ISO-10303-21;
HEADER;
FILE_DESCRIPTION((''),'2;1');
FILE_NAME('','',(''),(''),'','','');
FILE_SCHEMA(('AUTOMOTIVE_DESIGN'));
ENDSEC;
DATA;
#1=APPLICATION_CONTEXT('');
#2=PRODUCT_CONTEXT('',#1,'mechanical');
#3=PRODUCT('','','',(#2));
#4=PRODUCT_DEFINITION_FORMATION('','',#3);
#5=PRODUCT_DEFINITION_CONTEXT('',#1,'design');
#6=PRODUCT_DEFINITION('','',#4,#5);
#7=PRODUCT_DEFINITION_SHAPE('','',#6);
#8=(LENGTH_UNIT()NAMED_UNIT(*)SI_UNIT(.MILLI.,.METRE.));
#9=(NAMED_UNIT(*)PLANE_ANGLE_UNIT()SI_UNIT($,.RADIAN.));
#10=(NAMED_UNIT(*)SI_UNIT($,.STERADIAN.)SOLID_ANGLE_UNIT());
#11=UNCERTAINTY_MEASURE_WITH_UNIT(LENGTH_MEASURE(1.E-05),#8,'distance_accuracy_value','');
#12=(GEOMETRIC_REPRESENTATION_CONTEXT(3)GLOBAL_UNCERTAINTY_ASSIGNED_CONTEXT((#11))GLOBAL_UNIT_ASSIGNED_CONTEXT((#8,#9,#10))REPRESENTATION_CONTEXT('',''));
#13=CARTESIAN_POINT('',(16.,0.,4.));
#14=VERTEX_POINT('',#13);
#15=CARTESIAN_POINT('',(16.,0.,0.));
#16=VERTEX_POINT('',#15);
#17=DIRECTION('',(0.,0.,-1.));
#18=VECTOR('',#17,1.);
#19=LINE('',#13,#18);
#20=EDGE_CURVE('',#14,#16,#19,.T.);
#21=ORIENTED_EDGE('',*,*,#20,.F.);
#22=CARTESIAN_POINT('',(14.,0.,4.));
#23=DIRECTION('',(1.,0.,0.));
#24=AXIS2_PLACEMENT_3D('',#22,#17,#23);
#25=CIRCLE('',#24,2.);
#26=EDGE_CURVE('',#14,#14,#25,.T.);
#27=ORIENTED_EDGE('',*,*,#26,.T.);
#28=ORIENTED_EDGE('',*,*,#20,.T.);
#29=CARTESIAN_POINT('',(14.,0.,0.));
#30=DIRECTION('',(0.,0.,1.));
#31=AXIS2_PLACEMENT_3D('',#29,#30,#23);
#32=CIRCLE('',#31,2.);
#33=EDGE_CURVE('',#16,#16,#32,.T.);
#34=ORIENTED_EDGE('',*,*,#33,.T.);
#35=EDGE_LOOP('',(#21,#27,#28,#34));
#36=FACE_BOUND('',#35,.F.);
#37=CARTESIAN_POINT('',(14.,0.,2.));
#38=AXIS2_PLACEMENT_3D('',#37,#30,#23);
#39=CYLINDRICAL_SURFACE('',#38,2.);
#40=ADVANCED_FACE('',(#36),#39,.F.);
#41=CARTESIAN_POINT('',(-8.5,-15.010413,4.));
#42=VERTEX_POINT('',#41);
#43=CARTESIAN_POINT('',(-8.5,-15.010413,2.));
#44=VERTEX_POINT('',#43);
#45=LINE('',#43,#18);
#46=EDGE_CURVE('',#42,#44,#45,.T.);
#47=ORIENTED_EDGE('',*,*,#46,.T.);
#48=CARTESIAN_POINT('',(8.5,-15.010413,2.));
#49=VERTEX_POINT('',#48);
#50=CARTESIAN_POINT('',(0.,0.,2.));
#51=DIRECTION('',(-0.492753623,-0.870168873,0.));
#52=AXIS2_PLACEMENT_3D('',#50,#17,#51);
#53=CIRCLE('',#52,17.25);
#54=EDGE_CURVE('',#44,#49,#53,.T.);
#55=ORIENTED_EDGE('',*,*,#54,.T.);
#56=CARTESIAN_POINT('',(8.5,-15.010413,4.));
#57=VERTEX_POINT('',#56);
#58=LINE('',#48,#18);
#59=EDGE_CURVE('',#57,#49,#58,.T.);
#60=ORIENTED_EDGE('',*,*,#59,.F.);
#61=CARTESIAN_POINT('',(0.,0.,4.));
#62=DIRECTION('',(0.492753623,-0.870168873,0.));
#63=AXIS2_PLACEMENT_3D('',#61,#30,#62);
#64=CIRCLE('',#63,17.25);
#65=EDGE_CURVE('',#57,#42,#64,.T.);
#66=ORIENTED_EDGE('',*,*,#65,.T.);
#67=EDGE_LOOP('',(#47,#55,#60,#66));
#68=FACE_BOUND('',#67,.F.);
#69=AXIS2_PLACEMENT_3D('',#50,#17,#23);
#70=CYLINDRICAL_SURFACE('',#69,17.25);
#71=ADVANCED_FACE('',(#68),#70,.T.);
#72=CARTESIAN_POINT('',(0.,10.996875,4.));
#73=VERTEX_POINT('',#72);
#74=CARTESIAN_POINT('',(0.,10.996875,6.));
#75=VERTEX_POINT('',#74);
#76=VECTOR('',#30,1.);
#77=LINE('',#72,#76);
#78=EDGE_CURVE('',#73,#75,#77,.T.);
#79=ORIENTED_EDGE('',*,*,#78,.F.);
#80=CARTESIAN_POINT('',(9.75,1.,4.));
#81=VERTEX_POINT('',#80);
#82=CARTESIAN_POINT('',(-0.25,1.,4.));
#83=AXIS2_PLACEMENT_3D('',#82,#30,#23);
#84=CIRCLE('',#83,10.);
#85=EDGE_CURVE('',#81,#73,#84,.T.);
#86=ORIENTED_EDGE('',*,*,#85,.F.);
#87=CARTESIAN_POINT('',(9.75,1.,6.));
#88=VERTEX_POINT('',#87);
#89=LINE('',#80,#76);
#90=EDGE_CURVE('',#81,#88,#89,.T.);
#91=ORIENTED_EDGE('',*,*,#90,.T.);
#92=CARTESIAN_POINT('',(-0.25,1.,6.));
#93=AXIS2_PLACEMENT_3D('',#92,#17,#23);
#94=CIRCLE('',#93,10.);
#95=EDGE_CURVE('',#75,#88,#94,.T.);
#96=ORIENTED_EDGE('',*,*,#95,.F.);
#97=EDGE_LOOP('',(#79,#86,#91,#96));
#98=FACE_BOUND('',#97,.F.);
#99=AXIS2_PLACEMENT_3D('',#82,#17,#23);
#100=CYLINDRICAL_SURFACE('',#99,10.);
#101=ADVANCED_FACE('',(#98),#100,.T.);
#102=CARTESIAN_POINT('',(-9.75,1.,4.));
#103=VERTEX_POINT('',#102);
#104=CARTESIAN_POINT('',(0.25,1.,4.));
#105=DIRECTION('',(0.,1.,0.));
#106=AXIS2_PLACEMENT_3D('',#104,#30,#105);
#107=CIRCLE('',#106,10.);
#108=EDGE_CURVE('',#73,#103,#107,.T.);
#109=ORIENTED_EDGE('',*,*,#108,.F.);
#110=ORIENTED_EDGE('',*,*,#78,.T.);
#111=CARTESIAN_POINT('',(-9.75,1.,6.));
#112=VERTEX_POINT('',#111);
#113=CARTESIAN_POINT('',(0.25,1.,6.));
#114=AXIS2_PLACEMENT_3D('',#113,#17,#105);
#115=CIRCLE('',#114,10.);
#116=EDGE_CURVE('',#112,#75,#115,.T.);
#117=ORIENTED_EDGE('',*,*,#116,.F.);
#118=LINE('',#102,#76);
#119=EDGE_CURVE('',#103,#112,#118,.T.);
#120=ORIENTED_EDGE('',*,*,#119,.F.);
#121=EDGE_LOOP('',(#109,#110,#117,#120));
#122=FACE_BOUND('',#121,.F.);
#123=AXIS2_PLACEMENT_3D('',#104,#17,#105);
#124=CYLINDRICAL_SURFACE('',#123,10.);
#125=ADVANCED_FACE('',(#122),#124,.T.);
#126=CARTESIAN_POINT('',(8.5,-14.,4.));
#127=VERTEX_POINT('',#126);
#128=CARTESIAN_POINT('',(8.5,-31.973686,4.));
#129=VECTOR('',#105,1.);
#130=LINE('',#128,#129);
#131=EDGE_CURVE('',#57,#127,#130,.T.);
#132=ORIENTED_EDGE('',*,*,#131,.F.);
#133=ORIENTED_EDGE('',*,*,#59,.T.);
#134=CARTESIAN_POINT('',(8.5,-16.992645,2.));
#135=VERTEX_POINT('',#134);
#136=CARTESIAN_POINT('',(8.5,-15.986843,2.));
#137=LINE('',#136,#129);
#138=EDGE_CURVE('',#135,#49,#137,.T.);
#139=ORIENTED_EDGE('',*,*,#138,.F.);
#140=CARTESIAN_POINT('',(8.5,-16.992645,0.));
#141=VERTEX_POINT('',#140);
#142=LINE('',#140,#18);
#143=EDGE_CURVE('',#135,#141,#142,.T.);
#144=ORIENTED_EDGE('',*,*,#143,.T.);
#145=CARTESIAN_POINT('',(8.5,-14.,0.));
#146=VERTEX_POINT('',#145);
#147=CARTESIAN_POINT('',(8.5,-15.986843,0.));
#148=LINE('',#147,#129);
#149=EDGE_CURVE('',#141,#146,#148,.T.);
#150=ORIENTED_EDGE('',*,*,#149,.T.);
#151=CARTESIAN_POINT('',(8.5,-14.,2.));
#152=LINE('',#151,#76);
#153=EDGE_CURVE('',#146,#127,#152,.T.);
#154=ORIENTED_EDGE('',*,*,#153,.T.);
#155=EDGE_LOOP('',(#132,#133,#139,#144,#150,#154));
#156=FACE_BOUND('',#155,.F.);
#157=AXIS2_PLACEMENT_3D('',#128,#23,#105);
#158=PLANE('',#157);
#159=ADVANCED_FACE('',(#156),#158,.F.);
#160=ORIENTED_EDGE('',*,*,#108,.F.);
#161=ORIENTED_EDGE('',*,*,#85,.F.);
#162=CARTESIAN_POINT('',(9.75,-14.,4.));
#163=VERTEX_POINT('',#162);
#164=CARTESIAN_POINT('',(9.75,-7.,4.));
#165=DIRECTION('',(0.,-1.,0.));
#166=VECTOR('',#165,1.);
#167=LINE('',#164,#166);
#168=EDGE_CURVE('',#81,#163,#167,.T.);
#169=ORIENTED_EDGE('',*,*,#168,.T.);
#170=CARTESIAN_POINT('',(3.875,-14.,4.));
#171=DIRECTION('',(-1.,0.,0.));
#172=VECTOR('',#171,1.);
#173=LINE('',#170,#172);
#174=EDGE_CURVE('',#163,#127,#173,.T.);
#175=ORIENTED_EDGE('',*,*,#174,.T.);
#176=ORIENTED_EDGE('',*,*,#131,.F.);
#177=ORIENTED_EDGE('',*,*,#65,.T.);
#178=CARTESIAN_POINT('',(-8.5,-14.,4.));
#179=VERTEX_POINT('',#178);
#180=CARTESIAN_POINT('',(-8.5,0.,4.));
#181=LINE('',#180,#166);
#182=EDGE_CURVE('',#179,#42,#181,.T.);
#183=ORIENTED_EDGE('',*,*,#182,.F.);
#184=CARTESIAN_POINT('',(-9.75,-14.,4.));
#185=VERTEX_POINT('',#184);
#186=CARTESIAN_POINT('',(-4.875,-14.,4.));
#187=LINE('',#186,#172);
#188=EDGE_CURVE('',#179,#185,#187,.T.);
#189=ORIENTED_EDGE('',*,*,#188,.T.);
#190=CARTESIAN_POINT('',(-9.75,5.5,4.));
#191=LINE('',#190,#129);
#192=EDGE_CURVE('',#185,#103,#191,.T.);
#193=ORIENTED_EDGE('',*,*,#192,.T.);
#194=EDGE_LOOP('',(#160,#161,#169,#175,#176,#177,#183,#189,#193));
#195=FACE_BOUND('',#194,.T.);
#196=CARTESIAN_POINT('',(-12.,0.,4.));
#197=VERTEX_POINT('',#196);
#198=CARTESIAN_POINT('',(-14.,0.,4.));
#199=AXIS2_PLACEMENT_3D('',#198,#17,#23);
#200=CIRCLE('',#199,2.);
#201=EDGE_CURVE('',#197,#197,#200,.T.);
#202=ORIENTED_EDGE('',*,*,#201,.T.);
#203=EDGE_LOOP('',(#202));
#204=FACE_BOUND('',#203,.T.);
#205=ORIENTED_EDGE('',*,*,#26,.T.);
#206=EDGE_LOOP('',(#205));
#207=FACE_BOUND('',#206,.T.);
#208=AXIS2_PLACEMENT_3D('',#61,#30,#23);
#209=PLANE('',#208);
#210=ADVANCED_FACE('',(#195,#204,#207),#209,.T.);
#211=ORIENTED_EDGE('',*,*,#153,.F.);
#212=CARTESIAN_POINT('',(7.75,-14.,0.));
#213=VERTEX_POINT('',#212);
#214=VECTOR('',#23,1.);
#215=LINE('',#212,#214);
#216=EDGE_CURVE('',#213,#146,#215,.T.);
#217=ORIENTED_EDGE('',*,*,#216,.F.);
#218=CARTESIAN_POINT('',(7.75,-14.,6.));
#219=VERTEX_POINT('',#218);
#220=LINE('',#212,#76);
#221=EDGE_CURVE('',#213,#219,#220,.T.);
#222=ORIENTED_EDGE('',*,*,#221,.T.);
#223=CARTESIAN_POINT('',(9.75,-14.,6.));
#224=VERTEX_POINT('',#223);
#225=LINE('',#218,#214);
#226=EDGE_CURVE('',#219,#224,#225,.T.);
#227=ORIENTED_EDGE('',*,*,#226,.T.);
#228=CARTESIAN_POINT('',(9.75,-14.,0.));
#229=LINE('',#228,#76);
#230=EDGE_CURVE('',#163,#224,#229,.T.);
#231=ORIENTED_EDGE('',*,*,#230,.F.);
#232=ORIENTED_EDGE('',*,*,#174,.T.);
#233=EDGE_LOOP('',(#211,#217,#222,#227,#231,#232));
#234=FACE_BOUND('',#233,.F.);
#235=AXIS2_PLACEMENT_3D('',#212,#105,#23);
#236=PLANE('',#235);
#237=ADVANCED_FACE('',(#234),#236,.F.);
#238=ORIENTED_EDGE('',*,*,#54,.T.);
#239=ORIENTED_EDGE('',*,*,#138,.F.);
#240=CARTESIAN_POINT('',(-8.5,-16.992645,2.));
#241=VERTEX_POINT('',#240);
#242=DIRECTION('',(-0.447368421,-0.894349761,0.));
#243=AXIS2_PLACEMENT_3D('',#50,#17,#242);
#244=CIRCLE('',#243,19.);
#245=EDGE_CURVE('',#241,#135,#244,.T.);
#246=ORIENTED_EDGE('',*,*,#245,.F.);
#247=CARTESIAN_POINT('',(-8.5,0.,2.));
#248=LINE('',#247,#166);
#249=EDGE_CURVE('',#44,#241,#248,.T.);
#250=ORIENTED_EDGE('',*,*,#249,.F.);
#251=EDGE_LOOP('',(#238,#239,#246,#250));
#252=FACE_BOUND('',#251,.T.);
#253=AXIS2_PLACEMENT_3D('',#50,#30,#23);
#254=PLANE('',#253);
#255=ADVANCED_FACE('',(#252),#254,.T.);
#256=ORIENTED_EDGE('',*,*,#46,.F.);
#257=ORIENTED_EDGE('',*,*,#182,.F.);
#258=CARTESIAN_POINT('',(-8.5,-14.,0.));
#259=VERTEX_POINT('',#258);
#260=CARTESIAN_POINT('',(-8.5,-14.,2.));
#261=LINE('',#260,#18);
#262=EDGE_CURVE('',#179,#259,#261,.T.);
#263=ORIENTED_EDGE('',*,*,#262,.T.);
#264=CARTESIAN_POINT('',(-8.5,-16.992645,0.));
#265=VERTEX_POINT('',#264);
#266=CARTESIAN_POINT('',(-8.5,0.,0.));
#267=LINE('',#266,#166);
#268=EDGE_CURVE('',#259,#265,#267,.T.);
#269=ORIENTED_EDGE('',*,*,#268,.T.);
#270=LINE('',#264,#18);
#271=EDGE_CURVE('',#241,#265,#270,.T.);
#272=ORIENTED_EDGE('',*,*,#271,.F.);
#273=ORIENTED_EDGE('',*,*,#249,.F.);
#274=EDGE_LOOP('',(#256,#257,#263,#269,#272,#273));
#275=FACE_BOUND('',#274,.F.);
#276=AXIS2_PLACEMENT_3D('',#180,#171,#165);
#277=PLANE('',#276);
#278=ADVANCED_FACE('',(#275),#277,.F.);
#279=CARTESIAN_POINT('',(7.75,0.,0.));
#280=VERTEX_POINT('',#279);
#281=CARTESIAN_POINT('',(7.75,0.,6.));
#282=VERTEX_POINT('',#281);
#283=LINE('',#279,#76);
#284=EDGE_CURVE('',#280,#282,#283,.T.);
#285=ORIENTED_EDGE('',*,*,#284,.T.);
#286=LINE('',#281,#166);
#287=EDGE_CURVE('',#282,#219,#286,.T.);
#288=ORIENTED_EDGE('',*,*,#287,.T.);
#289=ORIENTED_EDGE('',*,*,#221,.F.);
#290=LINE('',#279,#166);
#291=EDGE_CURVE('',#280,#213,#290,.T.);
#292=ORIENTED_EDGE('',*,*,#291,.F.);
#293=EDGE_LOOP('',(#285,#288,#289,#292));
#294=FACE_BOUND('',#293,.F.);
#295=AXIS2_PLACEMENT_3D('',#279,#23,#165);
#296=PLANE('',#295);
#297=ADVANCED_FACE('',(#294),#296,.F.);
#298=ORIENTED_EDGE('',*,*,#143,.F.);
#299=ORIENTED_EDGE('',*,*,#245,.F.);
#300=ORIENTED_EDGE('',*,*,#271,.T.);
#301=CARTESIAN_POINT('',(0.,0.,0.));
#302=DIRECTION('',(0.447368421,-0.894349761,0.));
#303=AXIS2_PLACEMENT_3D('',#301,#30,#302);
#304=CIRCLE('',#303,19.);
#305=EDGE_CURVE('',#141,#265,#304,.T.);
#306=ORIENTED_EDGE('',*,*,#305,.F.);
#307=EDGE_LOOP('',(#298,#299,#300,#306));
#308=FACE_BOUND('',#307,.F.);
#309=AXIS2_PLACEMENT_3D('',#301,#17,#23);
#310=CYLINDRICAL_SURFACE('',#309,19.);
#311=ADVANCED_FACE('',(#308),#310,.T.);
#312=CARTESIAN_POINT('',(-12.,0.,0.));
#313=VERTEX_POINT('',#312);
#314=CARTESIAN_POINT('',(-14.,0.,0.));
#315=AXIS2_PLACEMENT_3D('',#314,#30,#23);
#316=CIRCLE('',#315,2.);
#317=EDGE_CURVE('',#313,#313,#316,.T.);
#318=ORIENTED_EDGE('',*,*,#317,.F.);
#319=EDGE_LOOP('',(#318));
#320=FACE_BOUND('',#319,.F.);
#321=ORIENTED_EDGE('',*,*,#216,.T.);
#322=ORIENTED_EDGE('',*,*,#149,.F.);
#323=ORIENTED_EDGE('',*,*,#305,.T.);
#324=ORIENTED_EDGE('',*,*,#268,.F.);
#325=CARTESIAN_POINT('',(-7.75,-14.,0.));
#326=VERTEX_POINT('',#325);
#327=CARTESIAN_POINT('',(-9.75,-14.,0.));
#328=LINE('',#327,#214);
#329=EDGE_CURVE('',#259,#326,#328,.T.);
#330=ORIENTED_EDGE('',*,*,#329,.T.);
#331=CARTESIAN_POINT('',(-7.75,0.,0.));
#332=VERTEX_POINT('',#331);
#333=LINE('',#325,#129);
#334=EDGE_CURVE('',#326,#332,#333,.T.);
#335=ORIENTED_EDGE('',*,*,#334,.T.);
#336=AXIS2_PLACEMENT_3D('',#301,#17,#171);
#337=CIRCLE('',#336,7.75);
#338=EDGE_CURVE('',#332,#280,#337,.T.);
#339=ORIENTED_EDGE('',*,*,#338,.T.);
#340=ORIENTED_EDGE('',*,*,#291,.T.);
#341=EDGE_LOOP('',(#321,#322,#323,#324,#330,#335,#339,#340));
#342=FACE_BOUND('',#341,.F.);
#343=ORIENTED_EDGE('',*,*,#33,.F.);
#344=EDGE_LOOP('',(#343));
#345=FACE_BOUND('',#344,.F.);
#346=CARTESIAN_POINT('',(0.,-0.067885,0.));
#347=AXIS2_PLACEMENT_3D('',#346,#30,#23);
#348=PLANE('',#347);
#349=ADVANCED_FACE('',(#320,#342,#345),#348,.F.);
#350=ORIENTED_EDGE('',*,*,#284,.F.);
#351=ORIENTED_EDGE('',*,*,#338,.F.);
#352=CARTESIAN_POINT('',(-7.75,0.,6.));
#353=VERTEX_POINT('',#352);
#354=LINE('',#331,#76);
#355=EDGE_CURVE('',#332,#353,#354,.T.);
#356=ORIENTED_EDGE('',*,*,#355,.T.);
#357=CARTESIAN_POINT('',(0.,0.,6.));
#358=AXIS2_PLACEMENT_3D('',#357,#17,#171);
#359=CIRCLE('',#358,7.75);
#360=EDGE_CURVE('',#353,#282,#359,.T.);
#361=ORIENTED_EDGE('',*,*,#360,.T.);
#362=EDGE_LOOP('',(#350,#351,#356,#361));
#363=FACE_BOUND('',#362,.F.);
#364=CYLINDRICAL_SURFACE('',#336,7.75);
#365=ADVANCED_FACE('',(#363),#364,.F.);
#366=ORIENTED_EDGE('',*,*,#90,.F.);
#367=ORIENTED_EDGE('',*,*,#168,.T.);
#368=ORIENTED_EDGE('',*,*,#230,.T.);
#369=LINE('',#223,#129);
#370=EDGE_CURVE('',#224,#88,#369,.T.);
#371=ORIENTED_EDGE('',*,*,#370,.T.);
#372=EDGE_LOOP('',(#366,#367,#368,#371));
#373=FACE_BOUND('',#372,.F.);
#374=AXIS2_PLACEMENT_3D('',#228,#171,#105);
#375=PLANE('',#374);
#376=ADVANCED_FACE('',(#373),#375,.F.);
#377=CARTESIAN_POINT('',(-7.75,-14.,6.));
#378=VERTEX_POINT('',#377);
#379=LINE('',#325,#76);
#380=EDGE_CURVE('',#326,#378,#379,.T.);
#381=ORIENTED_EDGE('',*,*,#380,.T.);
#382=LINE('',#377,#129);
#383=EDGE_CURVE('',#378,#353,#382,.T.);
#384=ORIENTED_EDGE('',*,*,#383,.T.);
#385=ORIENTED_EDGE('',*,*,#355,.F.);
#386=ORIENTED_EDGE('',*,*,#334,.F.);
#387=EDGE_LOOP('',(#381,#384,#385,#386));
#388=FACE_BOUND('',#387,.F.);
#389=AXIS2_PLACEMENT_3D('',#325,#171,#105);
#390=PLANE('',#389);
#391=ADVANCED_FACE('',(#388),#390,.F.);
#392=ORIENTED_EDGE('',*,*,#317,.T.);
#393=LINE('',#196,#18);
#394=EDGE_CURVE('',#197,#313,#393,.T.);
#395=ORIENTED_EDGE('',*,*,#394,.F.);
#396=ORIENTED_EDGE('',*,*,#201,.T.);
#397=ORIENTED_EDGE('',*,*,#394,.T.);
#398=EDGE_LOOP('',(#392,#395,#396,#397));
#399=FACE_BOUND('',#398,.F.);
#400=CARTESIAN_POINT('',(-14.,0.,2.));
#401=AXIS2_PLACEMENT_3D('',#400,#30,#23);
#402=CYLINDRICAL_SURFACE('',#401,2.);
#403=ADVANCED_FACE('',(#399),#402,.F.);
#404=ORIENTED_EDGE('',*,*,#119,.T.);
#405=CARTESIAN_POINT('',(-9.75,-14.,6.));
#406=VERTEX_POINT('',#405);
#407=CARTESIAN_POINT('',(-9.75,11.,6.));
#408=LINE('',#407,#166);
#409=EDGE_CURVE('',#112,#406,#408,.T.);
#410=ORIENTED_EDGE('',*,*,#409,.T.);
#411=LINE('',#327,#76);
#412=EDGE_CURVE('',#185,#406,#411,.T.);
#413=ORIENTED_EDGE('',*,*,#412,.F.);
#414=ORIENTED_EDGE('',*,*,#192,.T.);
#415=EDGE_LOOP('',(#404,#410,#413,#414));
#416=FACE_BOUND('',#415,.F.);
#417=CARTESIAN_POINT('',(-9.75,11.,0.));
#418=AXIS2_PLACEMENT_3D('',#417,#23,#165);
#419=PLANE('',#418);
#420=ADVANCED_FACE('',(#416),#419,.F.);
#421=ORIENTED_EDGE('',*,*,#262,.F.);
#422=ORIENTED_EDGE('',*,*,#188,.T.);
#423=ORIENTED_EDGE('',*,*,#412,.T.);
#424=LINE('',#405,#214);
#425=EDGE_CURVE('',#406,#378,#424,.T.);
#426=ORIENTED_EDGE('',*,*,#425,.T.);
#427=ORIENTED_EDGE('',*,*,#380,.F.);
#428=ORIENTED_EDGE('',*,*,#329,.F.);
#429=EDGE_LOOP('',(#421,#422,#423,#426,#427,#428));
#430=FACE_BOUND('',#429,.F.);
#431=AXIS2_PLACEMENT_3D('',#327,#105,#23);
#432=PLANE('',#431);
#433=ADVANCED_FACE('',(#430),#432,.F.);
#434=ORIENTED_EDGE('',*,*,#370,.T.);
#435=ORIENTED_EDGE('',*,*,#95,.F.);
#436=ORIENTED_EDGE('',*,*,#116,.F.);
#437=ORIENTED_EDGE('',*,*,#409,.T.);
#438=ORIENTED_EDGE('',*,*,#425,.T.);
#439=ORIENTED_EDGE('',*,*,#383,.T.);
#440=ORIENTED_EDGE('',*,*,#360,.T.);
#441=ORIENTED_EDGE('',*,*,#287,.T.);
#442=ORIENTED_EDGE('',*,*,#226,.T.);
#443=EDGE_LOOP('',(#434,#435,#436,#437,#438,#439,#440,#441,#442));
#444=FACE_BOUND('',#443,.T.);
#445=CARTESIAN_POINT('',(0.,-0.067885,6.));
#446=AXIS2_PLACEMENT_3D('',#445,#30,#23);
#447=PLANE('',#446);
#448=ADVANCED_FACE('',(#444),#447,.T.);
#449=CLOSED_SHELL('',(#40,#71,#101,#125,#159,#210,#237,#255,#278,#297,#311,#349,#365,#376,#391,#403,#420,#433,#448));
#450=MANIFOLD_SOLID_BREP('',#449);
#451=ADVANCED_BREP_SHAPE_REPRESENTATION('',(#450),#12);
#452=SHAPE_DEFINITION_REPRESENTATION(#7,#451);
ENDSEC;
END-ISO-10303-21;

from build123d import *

# Parameters (mm, degrees)
F0_R        = 19
F1_DEPTH    = 2
F2_R        = 17.25
F3_DEPTH    = 2
F5_DEPTH    = 25
F7_DEPTH    = 6
F8_T1_DEPTH = 27
F9_R        = 2
F10_DEPTH   = 25
F11_R       = 2
F12_DEPTH   = 25
F13_R       = 2
F14_DEPTH   = 25


# Not quite as in the source:
# - a fillet or chamfer that OpenCascade refuses, or shapes differently, is made with other operations: its cross-section is extruded or revolved along the edge and cut away or added


with BuildPart() as f1:
    # F0 (on Top) → F1 (new body)
    with BuildSketch(Plane.XY):
        Circle(F0_R)
    extrude(amount=F1_DEPTH)

    # F2 (on face) → F3 (join)
    with BuildSketch(Plane.XY.offset(2)):
        Circle(F2_R)
    extrude(amount=F3_DEPTH)

    # F4 (on face) → F5 (cut)
    with BuildSketch(Plane.XY.offset(4)):
        with BuildLine():
            Line((0, 0), (8.5, 0))
            ThreePointArc((8.5, 0), (0, 8.5), (-8.5, 0))
            Line((-8.5, 0), (0, 0))
        make_face()
        with BuildLine():
            ThreePointArc((-8.5, 0), (0, -8.5), (8.5, 0))
            Line((8.5, 0), (0, 0))
            Line((0, 0), (-8.5, 0))
        make_face()
        with BuildLine():
            Line((8.5, -31.9736860693), (8.5, -15.0104130523))
            ThreePointArc((8.5, -15.0104130523), (0, -17.25), (-8.5, -15.0104130523))
            Line((-8.5, -15.0104130523), (-8.5, -31.0855284333))
            Line((-8.5, -31.0855284333), (8.5, -31.9736860693))
        make_face()
        with BuildLine():
            Line((8.5, -15.0104130523), (8.5, 0))
            ThreePointArc((8.5, 0), (0, -8.5), (-8.5, 0))
            Line((-8.5, 0), (-8.5, -15.0104130523))
            ThreePointArc((-8.5, -15.0104130523), (0, -17.25), (8.5, -15.0104130523))
        make_face()
    extrude(amount=-F5_DEPTH, mode=Mode.SUBTRACT)

    # F6 (on Top) → F7 (join)
    with BuildSketch(Plane.XY):
        with BuildLine():
            ThreePointArc((-7.75, 0), (0, 7.75), (7.75, 0))
            Line((7.75, 0), (7.75, -14))
            Line((7.75, -14), (9.75, -14))
            Line((9.75, -14), (9.75, 11))
            Line((9.75, 11), (-9.75, 11))
            Line((-9.75, 11), (-9.75, -14))
            Line((-9.75, -14), (-7.75, -14))
            Line((-7.75, -14), (-7.75, 0))
        make_face()
    extrude(amount=F7_DEPTH)

    # F8: fillet of radius 10 on 2 edges, made by hand

    # F8_s2 → F8_t1 (cut)
    with BuildSketch(Plane.XY.offset(4)):
        with BuildLine():
            ThreePointArc((9.75, 1), (6.8210678119, 8.0710678119), (-0.25, 11))
            Line((-0.25, 11), (9.75, 11))
            Line((9.75, 11), (9.75, 1))
        make_face()
        with BuildLine():
            ThreePointArc((0.25, 11), (-6.8210678119, 8.0710678119), (-9.75, 1))
            Line((-9.75, 1), (-9.75, 11))
            Line((-9.75, 11), (0.25, 11))
        make_face()
    extrude(amount=F8_T1_DEPTH, mode=Mode.SUBTRACT)

    # F9 (on face) → F10 (cut)
    with BuildSketch(Plane.XY.offset(2)):
        with Locations((14, 0)):
            Circle(F9_R)
        with BuildLine():
            ThreePointArc((-16, 0), (-14, -2), (-12, 0))
            ThreePointArc((-12, 0), (-14, 2), (-16, 0))
        make_face()
    extrude(amount=-F10_DEPTH, mode=Mode.SUBTRACT)

    # F11 (on face) → F12 (cut)
    with BuildSketch(Plane(origin=(0, 0, 2), x_dir=(1, 0, 0), z_dir=(0, 0, -1))):
        with Locations((-14, 0)):
            Circle(F11_R)
    extrude(amount=-F12_DEPTH, mode=Mode.SUBTRACT)

    # F13 (on face) → F14 (cut)
    with BuildSketch(Plane(origin=(0, 0, 2), x_dir=(1, 0, 0), z_dir=(0, 0, -1))):
        with Locations((14, 0)):
            Circle(F13_R)
    extrude(amount=-F14_DEPTH, mode=Mode.SUBTRACT)


solid = f1.part
